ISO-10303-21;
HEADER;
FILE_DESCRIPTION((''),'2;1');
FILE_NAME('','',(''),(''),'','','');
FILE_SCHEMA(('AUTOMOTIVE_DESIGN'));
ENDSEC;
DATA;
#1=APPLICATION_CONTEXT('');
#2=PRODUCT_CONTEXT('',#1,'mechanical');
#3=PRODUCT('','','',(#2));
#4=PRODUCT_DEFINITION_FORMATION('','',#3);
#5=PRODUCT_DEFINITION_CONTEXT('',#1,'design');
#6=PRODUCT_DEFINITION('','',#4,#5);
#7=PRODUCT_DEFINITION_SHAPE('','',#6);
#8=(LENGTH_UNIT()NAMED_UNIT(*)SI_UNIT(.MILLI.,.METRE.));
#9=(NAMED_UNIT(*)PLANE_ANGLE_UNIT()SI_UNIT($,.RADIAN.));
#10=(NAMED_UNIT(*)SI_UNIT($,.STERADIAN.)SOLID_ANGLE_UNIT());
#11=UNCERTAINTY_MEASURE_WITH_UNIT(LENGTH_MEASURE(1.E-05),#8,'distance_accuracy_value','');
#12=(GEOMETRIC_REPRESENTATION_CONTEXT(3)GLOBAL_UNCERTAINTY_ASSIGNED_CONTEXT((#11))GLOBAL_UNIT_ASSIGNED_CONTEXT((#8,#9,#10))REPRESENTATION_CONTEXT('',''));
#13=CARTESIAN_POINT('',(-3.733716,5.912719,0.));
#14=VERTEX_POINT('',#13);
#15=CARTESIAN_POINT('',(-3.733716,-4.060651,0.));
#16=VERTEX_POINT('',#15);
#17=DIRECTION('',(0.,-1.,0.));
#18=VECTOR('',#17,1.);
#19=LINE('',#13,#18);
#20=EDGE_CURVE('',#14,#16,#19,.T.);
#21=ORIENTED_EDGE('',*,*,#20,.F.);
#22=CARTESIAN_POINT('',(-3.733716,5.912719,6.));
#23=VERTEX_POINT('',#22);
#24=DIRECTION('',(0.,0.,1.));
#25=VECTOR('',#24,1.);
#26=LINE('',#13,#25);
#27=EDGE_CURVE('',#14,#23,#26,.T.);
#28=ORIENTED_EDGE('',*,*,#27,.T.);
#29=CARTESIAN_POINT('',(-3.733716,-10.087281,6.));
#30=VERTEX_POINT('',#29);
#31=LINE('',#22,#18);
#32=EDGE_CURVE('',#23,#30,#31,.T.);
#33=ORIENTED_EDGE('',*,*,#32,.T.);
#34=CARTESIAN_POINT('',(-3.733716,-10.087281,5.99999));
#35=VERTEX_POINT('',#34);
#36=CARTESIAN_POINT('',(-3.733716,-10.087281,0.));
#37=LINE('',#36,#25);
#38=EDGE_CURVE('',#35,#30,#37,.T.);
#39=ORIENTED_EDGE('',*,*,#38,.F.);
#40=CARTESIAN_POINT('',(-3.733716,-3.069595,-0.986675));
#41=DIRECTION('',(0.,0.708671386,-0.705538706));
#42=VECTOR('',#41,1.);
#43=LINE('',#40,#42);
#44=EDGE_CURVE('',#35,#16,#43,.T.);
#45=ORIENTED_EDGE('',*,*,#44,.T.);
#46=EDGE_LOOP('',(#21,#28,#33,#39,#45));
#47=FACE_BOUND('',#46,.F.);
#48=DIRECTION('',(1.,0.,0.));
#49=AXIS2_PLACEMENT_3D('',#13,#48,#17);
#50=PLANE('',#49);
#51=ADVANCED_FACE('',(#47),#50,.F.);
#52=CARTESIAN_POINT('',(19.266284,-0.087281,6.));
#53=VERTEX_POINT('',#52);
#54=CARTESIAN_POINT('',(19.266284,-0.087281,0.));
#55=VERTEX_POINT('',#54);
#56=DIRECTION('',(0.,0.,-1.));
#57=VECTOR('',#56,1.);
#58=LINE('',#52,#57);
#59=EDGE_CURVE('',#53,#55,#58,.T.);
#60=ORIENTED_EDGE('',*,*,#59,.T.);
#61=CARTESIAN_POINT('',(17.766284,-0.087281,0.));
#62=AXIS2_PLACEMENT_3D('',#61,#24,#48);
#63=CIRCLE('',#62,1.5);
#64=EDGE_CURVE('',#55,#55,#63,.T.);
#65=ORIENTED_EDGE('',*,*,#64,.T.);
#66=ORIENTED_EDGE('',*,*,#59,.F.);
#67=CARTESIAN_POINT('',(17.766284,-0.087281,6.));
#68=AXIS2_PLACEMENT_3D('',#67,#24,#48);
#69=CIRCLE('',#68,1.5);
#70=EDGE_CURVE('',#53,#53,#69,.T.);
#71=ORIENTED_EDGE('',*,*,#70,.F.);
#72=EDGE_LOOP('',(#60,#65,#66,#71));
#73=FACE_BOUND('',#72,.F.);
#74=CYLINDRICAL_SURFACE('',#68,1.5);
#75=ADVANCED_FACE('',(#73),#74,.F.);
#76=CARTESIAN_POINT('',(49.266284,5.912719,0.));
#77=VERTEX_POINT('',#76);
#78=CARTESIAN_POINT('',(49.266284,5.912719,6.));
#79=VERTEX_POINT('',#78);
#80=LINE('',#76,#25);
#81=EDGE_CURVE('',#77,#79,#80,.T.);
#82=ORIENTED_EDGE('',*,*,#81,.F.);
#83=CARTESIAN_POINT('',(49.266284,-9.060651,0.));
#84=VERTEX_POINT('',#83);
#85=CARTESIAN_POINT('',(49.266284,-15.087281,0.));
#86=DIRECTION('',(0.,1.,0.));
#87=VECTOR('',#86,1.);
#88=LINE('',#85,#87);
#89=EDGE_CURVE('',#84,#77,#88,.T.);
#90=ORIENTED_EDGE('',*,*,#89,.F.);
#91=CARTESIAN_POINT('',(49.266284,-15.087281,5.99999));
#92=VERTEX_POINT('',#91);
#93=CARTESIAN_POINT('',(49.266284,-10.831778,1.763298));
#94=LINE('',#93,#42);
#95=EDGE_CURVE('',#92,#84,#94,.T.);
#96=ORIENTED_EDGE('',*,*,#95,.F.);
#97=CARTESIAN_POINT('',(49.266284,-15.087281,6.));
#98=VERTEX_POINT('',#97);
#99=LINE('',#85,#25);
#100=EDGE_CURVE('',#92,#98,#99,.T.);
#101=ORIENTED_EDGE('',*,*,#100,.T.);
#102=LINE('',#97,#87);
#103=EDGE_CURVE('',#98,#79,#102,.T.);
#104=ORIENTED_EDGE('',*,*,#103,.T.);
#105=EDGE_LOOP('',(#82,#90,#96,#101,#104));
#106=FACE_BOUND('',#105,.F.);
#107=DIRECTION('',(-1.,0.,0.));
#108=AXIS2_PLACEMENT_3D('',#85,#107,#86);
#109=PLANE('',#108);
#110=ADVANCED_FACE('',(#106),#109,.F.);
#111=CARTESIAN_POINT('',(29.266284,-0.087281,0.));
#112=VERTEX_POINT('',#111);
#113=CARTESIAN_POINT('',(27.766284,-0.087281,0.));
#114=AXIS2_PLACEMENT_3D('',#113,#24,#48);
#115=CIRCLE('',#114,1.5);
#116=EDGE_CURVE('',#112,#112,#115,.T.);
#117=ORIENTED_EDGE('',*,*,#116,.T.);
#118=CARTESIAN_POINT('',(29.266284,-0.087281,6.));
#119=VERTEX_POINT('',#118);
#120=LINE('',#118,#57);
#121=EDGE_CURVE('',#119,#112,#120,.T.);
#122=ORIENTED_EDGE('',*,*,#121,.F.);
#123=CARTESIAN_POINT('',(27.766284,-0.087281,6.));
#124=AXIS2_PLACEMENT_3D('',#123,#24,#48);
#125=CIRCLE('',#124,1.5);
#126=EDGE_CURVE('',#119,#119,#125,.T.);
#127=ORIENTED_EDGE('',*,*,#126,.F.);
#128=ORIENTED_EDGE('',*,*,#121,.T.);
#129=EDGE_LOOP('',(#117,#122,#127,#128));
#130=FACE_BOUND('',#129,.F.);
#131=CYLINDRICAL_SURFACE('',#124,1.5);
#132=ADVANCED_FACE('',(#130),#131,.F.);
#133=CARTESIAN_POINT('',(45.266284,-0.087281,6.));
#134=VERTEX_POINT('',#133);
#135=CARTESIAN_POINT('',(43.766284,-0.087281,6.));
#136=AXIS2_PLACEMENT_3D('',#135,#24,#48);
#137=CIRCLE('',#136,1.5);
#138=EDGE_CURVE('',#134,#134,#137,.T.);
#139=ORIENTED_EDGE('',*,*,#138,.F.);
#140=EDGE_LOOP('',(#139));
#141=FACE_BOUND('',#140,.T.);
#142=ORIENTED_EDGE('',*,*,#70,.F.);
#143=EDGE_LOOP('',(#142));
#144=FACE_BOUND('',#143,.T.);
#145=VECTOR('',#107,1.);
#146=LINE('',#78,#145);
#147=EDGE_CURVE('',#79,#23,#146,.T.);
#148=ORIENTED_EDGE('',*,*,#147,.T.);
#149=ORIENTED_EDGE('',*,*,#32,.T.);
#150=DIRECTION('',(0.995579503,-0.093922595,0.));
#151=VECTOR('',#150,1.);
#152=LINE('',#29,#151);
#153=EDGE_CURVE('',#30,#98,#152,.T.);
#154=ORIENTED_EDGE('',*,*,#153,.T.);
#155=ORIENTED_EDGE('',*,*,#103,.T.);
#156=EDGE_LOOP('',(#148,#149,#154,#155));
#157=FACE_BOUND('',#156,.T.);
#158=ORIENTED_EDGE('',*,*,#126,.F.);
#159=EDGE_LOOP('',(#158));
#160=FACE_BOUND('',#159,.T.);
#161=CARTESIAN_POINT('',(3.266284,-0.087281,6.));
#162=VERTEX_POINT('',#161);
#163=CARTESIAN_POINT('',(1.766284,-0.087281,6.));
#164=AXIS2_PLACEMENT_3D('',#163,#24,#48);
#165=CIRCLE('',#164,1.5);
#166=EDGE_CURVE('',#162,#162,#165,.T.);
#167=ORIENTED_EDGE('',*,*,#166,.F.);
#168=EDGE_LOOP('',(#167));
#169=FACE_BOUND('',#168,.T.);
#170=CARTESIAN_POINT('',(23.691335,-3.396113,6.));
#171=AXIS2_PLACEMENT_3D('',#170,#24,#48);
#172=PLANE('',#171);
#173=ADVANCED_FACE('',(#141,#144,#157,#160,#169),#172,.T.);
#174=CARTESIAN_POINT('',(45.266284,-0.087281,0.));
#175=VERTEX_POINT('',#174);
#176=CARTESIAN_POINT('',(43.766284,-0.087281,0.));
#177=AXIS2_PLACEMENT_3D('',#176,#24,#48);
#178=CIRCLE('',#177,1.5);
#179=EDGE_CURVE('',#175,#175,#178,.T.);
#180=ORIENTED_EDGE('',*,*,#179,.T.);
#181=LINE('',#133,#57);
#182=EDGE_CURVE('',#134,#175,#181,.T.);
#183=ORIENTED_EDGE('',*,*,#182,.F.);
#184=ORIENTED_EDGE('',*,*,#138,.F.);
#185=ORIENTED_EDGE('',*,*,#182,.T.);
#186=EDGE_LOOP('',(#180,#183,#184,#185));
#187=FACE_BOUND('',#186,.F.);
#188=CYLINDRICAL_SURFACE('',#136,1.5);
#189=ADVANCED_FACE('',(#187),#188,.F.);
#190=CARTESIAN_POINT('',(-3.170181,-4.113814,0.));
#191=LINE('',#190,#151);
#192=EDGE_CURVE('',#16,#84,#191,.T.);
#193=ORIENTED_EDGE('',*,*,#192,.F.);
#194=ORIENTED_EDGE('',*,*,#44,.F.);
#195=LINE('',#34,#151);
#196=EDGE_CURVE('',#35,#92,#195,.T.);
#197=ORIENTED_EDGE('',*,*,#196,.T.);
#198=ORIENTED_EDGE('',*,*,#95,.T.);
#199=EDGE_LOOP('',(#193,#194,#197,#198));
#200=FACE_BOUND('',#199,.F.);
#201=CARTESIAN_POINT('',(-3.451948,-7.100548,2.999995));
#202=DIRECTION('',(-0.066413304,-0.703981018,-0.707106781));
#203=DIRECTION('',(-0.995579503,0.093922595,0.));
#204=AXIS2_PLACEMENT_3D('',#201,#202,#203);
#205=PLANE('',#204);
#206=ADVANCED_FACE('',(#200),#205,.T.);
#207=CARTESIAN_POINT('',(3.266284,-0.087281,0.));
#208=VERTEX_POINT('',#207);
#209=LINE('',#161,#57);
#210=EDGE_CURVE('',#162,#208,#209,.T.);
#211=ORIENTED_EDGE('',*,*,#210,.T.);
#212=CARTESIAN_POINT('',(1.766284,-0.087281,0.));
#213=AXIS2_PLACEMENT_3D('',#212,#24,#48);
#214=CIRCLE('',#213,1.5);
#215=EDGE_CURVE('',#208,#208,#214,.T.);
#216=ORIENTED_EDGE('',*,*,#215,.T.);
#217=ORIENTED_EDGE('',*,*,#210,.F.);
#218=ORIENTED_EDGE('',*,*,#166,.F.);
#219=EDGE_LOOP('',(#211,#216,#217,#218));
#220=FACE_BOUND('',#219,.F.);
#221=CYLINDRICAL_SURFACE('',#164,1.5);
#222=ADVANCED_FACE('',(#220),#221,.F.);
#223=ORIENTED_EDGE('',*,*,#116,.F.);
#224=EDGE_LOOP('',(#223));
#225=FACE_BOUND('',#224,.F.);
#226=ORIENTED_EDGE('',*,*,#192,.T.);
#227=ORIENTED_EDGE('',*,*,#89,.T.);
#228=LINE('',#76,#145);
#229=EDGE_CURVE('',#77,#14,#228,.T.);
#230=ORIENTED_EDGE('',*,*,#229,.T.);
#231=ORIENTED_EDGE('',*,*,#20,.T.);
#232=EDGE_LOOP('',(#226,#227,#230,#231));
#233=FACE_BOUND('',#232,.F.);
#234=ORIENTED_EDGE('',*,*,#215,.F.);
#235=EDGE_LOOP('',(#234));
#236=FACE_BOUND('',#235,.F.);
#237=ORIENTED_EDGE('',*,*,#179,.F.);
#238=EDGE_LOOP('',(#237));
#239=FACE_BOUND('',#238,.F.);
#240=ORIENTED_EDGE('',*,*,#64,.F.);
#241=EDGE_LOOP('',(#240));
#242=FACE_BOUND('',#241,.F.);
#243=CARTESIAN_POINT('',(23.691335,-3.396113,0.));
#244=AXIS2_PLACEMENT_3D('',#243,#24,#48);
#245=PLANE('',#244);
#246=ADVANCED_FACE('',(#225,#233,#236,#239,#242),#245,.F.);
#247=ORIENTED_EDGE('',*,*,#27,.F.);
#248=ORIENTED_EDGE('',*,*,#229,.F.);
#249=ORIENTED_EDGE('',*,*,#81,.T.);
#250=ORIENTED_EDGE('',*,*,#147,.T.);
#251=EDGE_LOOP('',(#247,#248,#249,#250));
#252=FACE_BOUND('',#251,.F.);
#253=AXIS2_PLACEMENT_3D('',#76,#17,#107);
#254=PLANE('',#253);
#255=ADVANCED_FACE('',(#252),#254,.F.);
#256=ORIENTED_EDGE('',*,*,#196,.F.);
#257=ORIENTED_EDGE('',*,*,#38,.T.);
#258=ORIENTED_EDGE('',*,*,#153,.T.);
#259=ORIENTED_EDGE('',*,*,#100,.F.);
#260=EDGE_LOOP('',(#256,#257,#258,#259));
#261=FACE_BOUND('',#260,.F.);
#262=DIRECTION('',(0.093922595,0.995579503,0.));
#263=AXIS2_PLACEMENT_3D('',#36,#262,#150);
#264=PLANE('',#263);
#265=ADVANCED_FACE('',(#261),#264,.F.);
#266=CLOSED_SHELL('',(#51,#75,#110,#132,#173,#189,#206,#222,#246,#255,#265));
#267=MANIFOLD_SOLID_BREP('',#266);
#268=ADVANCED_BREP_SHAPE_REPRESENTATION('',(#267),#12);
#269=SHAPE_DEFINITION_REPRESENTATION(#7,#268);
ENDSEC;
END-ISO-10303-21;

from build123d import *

# Parameters (mm, degrees)
F1_DEPTH = 6
F2_SIZE  = 5.99999
F3_R     = 1.5
F4_DEPTH = 6


# Not quite as in the source:
# - a fillet or chamfer is up to 0.001 mm smaller than in the source, because OpenCascade refuses the exact size


with BuildPart() as f1:
    # F0 (on Top) → F1 (new body)
    with BuildSketch(Plane.XY):
        Polygon((49.2662842423, 5.9127185345), (-3.7337157577, 5.9127185345), (-3.7337157577, -10.0872814655), (49.2662842423, -15.0872814655), align=None)
    extrude(amount=F1_DEPTH)

    # F2 (size 6 in the source; OpenCascade refuses exactly that, so slightly less here)
    f2_edges = [f1.edges().sort_by_distance(p)[0] for p in [
        (22.766284, -12.587281, 0),
    ]]
    chamfer(f2_edges, length=F2_SIZE)

    # F3 (on face) → F4 (cut, through all)
    with BuildSketch(Plane.XY.offset(6)):
        with Locations((1.7662842423, -0.0872814655)):
            Circle(F3_R)
        with Locations((17.7662842423, -0.0872814655)):
            Circle(F3_R)
        with Locations((27.7662842423, -0.0872814655)):
            Circle(F3_R)
        with Locations((43.7662842423, -0.0872814655)):
            Circle(F3_R)
    extrude(amount=-F4_DEPTH, mode=Mode.SUBTRACT)


solid = f1.part
